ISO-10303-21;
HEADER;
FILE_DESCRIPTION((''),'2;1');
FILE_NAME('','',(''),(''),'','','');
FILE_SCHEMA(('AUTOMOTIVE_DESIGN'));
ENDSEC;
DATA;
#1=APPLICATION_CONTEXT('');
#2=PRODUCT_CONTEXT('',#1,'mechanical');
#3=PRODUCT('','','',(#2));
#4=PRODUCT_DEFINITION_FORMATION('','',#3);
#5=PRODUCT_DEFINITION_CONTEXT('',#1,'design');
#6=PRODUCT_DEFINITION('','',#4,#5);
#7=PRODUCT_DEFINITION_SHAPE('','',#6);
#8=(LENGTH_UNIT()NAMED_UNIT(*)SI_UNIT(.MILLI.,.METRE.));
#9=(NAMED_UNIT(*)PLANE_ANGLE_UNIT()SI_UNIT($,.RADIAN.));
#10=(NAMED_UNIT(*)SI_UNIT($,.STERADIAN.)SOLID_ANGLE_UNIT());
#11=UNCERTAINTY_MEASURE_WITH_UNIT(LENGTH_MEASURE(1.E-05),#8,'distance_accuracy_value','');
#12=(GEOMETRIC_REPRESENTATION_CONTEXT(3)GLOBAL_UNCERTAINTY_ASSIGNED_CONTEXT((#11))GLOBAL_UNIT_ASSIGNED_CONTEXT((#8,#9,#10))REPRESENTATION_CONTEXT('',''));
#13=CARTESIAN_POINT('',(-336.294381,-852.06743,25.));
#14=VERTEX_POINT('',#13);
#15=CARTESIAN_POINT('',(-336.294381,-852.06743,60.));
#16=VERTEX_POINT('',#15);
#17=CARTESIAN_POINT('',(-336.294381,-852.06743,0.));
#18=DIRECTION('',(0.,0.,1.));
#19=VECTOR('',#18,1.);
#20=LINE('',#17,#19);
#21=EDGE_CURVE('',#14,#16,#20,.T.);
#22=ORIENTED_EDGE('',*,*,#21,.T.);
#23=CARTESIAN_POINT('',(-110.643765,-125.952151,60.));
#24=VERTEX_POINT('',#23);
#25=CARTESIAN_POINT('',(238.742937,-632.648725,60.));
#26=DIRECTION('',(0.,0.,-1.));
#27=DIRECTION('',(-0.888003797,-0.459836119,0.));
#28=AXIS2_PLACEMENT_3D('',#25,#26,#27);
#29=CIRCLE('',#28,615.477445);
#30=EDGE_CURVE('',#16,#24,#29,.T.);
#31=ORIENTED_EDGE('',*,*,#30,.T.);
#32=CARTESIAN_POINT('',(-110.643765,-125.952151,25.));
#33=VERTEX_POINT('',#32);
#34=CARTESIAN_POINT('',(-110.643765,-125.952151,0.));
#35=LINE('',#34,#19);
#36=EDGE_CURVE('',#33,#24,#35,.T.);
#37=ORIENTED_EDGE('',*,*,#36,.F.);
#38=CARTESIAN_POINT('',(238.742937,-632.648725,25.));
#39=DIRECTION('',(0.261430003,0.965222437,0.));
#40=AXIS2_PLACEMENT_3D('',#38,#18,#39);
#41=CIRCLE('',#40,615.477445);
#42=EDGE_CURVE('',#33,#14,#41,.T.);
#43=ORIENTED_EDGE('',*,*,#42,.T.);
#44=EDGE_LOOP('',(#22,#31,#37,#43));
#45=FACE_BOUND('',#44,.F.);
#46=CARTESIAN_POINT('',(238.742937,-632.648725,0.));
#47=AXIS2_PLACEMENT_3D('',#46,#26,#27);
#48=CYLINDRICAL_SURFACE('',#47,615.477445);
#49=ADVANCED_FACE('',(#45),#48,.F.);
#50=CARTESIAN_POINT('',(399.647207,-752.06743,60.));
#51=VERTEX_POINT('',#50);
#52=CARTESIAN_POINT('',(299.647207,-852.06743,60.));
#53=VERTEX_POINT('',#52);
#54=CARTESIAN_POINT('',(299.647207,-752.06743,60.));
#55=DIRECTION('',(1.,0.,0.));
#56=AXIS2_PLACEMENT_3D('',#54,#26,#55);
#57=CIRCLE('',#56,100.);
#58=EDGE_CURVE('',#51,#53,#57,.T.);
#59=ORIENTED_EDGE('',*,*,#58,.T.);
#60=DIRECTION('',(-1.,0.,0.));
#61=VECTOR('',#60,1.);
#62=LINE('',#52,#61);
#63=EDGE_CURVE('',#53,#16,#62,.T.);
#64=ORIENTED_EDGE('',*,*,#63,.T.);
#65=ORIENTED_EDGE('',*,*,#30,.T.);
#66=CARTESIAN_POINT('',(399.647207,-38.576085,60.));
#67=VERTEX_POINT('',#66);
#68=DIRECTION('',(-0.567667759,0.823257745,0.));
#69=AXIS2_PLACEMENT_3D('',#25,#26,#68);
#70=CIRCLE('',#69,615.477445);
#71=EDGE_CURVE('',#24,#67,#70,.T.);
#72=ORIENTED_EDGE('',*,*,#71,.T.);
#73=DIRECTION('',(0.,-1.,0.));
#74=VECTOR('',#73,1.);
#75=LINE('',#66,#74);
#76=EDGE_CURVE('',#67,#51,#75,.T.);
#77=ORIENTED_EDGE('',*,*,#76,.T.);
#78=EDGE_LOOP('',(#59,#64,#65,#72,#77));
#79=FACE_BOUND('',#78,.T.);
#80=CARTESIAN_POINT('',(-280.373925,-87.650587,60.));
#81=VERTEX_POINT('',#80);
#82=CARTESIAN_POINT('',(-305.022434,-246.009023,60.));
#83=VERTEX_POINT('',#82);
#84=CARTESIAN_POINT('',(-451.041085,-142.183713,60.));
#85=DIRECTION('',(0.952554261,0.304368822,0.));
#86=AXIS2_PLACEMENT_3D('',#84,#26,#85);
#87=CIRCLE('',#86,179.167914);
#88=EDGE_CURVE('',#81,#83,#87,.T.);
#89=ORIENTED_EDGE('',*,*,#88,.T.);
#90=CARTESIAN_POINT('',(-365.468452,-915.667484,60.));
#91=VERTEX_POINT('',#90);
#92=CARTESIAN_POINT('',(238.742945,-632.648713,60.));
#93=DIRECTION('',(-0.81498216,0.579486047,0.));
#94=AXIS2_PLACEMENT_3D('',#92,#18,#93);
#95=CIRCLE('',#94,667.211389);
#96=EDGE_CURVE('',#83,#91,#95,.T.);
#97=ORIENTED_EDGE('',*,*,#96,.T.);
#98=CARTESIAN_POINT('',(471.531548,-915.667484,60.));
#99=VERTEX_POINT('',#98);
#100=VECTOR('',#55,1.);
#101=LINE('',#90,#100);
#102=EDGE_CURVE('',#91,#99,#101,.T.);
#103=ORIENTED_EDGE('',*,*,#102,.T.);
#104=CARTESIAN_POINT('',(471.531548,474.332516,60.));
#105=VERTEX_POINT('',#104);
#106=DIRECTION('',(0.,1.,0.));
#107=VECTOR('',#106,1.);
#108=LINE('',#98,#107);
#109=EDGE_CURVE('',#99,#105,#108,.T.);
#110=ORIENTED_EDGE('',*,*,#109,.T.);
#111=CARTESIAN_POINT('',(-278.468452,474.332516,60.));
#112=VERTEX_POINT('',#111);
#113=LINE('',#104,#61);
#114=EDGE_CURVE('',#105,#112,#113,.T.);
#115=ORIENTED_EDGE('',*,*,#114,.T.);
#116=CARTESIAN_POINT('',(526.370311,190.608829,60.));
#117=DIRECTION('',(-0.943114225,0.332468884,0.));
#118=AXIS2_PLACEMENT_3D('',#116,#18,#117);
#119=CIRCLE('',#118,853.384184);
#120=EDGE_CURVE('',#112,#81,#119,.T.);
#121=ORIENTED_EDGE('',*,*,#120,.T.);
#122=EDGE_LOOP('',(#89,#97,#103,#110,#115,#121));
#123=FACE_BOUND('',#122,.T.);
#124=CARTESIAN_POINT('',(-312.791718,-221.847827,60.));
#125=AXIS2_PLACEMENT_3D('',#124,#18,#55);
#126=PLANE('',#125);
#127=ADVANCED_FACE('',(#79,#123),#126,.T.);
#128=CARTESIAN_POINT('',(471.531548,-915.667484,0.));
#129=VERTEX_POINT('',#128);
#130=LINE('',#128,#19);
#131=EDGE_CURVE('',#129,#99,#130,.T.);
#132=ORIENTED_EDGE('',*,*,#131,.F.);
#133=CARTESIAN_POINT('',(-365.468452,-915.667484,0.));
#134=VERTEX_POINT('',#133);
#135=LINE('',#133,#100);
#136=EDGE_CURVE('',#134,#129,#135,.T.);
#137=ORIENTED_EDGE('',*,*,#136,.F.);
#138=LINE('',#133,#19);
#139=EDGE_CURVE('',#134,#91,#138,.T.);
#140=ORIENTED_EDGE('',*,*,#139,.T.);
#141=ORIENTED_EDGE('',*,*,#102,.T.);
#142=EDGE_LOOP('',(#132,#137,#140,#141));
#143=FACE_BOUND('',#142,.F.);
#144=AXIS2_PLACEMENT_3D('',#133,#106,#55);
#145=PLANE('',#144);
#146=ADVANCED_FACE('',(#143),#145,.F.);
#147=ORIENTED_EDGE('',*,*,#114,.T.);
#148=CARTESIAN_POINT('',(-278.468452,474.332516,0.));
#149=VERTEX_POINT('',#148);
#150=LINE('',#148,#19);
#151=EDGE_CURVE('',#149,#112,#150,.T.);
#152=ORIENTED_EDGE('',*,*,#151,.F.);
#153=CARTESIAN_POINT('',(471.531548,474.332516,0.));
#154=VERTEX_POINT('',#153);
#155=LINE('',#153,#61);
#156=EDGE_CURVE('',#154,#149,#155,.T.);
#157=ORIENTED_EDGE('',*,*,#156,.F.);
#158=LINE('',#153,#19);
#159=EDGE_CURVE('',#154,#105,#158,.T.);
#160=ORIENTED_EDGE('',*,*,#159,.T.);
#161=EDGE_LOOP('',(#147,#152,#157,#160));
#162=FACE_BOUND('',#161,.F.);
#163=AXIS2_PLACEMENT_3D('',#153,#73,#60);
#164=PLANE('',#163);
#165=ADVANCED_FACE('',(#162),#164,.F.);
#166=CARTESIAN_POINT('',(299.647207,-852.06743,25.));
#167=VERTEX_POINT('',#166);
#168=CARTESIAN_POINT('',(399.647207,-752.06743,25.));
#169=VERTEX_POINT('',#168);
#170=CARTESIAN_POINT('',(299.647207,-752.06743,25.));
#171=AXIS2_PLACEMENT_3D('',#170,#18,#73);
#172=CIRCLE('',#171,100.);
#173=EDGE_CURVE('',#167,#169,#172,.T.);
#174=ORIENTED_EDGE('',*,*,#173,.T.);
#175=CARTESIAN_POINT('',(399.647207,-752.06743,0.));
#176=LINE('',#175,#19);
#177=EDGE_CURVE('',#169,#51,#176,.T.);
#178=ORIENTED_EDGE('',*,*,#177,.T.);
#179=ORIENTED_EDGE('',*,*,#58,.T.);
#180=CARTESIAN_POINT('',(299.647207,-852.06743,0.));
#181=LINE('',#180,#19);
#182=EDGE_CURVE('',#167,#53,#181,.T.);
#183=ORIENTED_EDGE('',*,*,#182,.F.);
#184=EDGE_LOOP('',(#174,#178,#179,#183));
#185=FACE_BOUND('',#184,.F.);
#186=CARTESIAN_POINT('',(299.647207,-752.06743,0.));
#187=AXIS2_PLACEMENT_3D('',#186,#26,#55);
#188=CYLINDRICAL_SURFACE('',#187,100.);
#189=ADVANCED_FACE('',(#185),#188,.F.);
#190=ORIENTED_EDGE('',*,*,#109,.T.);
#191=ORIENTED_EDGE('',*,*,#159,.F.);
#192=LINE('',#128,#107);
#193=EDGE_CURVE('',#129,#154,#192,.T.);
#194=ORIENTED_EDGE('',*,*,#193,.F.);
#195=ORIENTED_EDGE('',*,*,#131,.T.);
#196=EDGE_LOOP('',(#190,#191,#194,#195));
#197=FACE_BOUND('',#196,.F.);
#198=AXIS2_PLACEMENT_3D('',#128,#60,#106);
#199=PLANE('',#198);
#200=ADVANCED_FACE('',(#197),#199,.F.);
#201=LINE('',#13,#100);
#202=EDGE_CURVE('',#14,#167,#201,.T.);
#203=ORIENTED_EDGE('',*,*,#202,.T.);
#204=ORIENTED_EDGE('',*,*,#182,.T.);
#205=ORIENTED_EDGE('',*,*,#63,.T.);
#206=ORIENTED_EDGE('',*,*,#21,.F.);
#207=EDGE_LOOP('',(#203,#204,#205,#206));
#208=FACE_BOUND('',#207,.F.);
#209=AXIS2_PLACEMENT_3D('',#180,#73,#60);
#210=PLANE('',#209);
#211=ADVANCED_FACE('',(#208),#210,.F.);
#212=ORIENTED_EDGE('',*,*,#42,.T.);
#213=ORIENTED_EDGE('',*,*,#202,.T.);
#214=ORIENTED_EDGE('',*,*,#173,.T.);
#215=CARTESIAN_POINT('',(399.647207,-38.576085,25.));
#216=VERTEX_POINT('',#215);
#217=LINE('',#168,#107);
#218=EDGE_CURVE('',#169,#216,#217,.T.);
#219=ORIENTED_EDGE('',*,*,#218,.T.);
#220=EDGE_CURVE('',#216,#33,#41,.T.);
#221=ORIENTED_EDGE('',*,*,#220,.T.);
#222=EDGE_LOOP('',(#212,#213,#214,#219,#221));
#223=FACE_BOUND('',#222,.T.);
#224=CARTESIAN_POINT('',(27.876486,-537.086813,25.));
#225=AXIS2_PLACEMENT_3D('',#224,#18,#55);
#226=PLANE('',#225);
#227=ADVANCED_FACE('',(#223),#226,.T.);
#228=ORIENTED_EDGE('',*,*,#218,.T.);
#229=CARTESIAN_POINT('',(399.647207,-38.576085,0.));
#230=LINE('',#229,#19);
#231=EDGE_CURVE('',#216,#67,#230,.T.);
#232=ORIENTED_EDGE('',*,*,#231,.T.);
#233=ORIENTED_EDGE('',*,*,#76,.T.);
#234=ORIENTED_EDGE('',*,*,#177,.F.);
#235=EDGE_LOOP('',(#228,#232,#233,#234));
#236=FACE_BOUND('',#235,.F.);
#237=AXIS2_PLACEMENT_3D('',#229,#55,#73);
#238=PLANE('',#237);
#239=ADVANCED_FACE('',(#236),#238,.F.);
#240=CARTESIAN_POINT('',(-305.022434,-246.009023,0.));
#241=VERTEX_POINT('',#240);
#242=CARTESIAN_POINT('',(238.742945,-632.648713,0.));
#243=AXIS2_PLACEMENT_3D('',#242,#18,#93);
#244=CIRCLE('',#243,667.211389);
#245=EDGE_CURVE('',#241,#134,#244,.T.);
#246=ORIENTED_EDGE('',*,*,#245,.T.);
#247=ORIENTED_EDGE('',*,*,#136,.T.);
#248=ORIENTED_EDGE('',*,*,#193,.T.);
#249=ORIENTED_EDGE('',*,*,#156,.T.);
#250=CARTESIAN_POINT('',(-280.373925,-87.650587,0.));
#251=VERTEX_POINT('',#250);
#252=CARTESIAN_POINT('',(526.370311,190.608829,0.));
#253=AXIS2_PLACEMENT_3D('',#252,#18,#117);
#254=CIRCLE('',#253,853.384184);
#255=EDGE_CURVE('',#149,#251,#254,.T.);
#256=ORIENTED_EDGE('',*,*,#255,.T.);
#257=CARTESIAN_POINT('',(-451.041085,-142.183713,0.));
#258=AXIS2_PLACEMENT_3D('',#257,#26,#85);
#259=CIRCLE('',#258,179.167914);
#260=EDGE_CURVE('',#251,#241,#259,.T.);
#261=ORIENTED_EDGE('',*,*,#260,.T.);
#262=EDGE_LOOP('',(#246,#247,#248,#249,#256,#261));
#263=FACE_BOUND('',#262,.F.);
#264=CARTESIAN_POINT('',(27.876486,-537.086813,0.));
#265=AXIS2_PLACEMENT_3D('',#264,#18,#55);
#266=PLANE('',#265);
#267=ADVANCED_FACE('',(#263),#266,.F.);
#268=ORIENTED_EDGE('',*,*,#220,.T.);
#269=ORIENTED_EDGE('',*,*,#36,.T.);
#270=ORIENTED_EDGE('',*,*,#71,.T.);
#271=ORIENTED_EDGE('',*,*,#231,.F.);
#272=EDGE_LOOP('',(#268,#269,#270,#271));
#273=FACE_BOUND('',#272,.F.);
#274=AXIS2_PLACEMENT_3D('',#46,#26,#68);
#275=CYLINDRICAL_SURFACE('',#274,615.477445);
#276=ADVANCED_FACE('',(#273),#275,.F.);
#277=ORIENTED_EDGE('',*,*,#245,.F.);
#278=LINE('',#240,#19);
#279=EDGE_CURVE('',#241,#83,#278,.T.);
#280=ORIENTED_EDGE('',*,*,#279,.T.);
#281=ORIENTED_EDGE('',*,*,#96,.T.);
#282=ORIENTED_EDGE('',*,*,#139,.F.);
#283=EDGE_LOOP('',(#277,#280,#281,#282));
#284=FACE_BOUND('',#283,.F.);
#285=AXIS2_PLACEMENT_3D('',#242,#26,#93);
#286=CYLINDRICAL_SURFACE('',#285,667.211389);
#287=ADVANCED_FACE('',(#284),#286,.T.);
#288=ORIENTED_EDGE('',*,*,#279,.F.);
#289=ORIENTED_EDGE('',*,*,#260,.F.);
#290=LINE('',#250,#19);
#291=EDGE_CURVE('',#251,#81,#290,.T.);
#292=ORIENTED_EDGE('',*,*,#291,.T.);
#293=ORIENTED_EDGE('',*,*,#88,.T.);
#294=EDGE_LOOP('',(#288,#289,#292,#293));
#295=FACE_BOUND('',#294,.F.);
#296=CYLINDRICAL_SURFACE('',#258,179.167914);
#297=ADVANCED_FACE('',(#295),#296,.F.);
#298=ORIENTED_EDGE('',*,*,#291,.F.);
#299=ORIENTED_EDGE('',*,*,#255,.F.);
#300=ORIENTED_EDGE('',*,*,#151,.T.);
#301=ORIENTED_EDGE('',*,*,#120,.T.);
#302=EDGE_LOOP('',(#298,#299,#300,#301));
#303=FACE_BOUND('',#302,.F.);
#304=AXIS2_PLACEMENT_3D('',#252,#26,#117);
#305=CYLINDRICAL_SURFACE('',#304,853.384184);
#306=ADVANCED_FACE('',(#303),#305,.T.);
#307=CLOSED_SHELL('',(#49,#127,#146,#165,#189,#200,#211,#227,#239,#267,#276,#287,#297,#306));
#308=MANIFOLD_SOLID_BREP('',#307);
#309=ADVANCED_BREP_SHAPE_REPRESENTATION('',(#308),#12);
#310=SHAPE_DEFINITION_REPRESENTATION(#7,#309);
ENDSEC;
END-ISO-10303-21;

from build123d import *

# Parameters (mm, degrees)
F1_DEPTH = 60
F2_DEPTH = 25


# Not quite as in the source:
# - the program builds the solid bodies; features that only make, move or delete a surface that nothing else refers to are left out


with BuildPart() as f1:
    # F0 (on Top) → F1 (new body)
    with BuildSketch(Plane.XY):
        with BuildLine():
            ThreePointArc((-305.0224336339, -246.0090226419), (-425.7668614501, -572.66743243), (-365.4684518499, -915.6674839367))
            Line((-365.4684518499, -915.6674839367), (-337.7260933976, -915.6674839367))
            ThreePointArc((-337.7260933976, -915.6674839367), (-383.1853890072, -472.5820879471), (-129.4684518499, -106.4961260526))
            ThreePointArc((-129.4684518499, -106.4961260526), (-213.2726615111, 23.7464933662), (-249.4684518499, 174.3325160633))
            Line((-249.4684518499, 174.3325160633), (-249.4684518499, 474.3325160633))
            Line((-249.4684518499, 474.3325160633), (-278.4684518499, 474.3325160633))
            ThreePointArc((-278.4684518499, 474.3325160633), (-327.0089672753, 193.5023169021), (-280.3739250896, -87.6505867625))
            ThreePointArc((-280.3739250896, -87.6505867625), (-274.0048617812, -169.7394217084), (-305.0224336339, -246.0090226419))
        make_face()
        with BuildLine():
            ThreePointArc((-129.4684518499, -106.4961260526), (-383.1853890072, -472.5820879471), (-337.7260933976, -915.6674839367))
            Line((-337.7260933976, -915.6674839367), (-307.8033710716, -915.6674839367))
            ThreePointArc((-307.8033710716, -915.6674839367), (-322.9497717837, -884.2710326331), (-336.294380675, -852.0674300004))
            ThreePointArc((-336.294380675, -852.0674300004), (-349.0076832074, -449.9968879223), (-110.6437650385, -125.9521512216))
            ThreePointArc((-110.6437650385, -125.9521512216), (-120.198249318, -116.3616671102), (-129.4684518499, -106.4961260526))
        make_face()
        with BuildLine():
            ThreePointArc((-336.294380675, -852.0674300004), (-322.9497717837, -884.2710326331), (-307.8033710716, -915.6674839367))
            Line((-307.8033710716, -915.6674839367), (471.5315481501, -915.6674839367))
            Line((471.5315481501, -915.6674839367), (471.5315481501, -255.6674839367))
            Line((471.5315481501, -255.6674839367), (399.6472072601, -255.6674839367))
            Line((399.6472072601, -255.6674839367), (399.6472072601, -752.0674300004))
            ThreePointArc((399.6472072601, -752.0674300004), (370.3578853788, -822.778108119), (299.6472072601, -852.0674300004))
            Line((299.6472072601, -852.0674300004), (-336.294380675, -852.0674300004))
        make_face()
        with BuildLine():
            ThreePointArc((-249.4684518499, 174.3325160633), (-213.2726615111, 23.7464933662), (-129.4684518499, -106.4961260526))
            ThreePointArc((-129.4684518499, -106.4961260526), (-120.198249318, -116.3616671102), (-110.6437650385, -125.9521512216))
            ThreePointArc((-110.6437650385, -125.9521512216), (134.8677667197, -26.0001986196), (399.6472072601, -38.5760851606))
            Line((399.6472072601, -38.5760851606), (399.6472072601, -255.6674839367))
            Line((399.6472072601, -255.6674839367), (471.5315481501, -255.6674839367))
            Line((471.5315481501, -255.6674839367), (471.5315481501, 474.3325160633))
            Line((471.5315481501, 474.3325160633), (-249.4684518499, 474.3325160633))
            Line((-249.4684518499, 474.3325160633), (-249.4684518499, 174.3325160633))
        make_face()
    extrude(amount=F1_DEPTH)

    # F0 (on Top) → F2 (join)
    with BuildSketch(Plane.XY):
        with BuildLine():
            ThreePointArc((-110.6437650385, -125.9521512216), (-349.0076832074, -449.9968879223), (-336.294380675, -852.0674300004))
            Line((-336.294380675, -852.0674300004), (299.6472072601, -852.0674300004))
            ThreePointArc((299.6472072601, -852.0674300004), (370.3578853788, -822.778108119), (399.6472072601, -752.0674300004))
            Line((399.6472072601, -752.0674300004), (399.6472072601, -255.6674839367))
            Line((399.6472072601, -255.6674839367), (171.5315481501, -255.6674839367))
            ThreePointArc((171.5315481501, -255.6674839367), (19.2512340542, -215.1576843257), (-110.6437650385, -125.9521512216))
        make_face()
        with BuildLine():
            ThreePointArc((399.6472072601, -38.5760851606), (134.8677667197, -26.0001986196), (-110.6437650385, -125.9521512216))
            ThreePointArc((-110.6437650385, -125.9521512216), (19.2512340542, -215.1576843257), (171.5315481501, -255.6674839367))
            Line((171.5315481501, -255.6674839367), (399.6472072601, -255.6674839367))
            Line((399.6472072601, -255.6674839367), (399.6472072601, -38.5760851606))
        make_face()
    extrude(amount=F2_DEPTH)


solid = f1.part
